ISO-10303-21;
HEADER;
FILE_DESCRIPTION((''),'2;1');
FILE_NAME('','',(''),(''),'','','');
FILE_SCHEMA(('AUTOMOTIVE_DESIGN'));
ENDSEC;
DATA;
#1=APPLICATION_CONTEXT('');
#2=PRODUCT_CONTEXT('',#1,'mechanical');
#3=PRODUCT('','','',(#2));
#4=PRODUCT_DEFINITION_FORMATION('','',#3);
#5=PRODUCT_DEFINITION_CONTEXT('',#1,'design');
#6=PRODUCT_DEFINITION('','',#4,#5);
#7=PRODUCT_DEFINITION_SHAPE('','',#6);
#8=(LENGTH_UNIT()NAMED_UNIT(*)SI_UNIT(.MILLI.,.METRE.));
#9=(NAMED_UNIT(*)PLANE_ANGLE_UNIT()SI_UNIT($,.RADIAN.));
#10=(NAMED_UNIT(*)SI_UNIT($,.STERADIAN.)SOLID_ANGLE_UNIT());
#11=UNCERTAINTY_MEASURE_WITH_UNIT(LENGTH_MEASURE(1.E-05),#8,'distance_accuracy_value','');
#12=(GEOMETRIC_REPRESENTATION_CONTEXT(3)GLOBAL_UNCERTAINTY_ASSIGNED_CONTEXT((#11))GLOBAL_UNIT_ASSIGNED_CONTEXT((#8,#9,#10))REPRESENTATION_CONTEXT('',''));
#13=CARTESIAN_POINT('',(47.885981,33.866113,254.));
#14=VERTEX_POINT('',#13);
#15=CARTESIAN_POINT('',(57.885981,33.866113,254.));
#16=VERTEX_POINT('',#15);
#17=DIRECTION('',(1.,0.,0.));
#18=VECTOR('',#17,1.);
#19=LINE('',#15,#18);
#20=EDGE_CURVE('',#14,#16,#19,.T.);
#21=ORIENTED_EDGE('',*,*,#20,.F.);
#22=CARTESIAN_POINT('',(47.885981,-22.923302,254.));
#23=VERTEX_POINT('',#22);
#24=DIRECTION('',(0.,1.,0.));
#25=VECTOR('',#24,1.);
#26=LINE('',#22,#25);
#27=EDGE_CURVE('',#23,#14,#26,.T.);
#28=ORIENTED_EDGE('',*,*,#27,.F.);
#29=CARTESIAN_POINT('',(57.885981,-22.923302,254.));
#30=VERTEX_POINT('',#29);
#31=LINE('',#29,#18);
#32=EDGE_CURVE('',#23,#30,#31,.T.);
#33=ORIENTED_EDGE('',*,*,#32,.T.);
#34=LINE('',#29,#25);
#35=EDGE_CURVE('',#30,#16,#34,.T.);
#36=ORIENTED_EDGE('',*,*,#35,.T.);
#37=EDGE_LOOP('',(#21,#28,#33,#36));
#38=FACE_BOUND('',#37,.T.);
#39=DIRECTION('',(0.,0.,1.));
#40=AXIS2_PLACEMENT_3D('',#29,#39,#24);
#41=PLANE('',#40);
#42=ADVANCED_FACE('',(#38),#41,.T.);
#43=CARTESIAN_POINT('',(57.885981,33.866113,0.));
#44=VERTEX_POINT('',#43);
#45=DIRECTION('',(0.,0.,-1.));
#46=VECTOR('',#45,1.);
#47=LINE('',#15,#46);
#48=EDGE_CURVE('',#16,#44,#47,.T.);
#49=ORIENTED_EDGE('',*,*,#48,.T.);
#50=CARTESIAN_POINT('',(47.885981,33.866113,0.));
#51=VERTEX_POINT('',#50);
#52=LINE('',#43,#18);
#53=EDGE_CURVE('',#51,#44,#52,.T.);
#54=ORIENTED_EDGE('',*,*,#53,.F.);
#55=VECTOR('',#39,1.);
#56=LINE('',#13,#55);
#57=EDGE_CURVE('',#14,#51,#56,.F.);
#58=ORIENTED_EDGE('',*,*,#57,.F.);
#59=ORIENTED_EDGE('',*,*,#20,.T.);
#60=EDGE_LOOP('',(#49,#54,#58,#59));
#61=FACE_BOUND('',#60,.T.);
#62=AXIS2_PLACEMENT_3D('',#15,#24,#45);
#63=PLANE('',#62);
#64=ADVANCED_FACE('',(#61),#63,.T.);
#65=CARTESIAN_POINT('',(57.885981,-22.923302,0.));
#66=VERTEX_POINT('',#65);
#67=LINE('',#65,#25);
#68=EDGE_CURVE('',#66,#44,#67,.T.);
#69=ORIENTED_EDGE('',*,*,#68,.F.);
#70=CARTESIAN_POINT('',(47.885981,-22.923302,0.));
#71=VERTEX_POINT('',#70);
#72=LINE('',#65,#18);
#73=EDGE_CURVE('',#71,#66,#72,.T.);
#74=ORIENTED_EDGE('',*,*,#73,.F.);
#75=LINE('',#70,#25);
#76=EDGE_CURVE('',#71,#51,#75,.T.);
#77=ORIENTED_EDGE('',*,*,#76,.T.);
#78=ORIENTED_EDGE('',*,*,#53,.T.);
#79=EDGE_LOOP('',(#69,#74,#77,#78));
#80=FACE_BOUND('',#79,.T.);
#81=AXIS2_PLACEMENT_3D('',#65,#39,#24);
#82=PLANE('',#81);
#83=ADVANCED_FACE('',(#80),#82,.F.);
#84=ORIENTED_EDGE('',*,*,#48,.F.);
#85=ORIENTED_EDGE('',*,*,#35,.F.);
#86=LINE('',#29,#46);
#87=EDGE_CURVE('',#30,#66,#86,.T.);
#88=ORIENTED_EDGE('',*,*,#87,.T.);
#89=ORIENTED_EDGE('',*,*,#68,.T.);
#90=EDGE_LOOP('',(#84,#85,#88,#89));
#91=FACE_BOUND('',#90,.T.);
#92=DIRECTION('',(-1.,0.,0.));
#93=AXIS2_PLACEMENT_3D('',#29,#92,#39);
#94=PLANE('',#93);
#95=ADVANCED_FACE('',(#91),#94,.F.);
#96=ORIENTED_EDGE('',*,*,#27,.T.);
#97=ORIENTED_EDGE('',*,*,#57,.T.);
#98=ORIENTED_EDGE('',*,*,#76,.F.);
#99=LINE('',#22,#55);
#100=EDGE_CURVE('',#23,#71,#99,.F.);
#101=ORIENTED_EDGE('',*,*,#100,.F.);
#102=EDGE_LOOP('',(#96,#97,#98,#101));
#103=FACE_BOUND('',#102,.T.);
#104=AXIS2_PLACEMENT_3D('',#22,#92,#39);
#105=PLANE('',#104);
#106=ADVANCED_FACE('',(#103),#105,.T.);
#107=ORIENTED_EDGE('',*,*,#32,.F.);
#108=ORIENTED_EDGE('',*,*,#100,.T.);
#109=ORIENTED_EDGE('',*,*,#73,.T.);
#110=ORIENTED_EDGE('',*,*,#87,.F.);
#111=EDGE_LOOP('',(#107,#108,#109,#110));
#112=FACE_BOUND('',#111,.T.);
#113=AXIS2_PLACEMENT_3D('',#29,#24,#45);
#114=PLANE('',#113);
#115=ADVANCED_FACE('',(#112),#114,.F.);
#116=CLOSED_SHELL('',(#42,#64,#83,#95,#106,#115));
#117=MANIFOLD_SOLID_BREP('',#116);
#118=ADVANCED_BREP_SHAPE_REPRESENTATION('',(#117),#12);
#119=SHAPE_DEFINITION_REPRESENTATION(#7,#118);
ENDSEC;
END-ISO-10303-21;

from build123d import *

# Parameters (mm, degrees)
SKETCH5_W                = 117.163543562
SKETCH5_H                = 56.789414834
BOSS_EXTRUDE1_DEPTH      = 254
CONVERT_SOLID1_START     = -59.277562159
CONVERT_SOLID1_OUTLINE_W = 56.789414834
CONVERT_SOLID1_OUTLINE_H = 254
CONVERT_SOLID1_DEPTH     = 107.163543562


# Read off the part's stored shape, not the designer's step: Convert-Solid1
with BuildPart() as part:
    # Sketch5 → Boss-Extrude1 (new body)
    with BuildSketch(Plane.XY):
        with Locations((-0.695790378, 5.471405416)):
            Rectangle(SKETCH5_W, SKETCH5_H)
    extrude(amount=BOSS_EXTRUDE1_DEPTH)

    # Convert-Solid1 outline → Convert-Solid1 (cut)
    with BuildSketch(Plane.YZ.offset(CONVERT_SOLID1_START)):
        with Locations((5.471405416, 127)):
            Rectangle(CONVERT_SOLID1_OUTLINE_W, CONVERT_SOLID1_OUTLINE_H)
    extrude(amount=CONVERT_SOLID1_DEPTH, mode=Mode.SUBTRACT)


solid = part.part
